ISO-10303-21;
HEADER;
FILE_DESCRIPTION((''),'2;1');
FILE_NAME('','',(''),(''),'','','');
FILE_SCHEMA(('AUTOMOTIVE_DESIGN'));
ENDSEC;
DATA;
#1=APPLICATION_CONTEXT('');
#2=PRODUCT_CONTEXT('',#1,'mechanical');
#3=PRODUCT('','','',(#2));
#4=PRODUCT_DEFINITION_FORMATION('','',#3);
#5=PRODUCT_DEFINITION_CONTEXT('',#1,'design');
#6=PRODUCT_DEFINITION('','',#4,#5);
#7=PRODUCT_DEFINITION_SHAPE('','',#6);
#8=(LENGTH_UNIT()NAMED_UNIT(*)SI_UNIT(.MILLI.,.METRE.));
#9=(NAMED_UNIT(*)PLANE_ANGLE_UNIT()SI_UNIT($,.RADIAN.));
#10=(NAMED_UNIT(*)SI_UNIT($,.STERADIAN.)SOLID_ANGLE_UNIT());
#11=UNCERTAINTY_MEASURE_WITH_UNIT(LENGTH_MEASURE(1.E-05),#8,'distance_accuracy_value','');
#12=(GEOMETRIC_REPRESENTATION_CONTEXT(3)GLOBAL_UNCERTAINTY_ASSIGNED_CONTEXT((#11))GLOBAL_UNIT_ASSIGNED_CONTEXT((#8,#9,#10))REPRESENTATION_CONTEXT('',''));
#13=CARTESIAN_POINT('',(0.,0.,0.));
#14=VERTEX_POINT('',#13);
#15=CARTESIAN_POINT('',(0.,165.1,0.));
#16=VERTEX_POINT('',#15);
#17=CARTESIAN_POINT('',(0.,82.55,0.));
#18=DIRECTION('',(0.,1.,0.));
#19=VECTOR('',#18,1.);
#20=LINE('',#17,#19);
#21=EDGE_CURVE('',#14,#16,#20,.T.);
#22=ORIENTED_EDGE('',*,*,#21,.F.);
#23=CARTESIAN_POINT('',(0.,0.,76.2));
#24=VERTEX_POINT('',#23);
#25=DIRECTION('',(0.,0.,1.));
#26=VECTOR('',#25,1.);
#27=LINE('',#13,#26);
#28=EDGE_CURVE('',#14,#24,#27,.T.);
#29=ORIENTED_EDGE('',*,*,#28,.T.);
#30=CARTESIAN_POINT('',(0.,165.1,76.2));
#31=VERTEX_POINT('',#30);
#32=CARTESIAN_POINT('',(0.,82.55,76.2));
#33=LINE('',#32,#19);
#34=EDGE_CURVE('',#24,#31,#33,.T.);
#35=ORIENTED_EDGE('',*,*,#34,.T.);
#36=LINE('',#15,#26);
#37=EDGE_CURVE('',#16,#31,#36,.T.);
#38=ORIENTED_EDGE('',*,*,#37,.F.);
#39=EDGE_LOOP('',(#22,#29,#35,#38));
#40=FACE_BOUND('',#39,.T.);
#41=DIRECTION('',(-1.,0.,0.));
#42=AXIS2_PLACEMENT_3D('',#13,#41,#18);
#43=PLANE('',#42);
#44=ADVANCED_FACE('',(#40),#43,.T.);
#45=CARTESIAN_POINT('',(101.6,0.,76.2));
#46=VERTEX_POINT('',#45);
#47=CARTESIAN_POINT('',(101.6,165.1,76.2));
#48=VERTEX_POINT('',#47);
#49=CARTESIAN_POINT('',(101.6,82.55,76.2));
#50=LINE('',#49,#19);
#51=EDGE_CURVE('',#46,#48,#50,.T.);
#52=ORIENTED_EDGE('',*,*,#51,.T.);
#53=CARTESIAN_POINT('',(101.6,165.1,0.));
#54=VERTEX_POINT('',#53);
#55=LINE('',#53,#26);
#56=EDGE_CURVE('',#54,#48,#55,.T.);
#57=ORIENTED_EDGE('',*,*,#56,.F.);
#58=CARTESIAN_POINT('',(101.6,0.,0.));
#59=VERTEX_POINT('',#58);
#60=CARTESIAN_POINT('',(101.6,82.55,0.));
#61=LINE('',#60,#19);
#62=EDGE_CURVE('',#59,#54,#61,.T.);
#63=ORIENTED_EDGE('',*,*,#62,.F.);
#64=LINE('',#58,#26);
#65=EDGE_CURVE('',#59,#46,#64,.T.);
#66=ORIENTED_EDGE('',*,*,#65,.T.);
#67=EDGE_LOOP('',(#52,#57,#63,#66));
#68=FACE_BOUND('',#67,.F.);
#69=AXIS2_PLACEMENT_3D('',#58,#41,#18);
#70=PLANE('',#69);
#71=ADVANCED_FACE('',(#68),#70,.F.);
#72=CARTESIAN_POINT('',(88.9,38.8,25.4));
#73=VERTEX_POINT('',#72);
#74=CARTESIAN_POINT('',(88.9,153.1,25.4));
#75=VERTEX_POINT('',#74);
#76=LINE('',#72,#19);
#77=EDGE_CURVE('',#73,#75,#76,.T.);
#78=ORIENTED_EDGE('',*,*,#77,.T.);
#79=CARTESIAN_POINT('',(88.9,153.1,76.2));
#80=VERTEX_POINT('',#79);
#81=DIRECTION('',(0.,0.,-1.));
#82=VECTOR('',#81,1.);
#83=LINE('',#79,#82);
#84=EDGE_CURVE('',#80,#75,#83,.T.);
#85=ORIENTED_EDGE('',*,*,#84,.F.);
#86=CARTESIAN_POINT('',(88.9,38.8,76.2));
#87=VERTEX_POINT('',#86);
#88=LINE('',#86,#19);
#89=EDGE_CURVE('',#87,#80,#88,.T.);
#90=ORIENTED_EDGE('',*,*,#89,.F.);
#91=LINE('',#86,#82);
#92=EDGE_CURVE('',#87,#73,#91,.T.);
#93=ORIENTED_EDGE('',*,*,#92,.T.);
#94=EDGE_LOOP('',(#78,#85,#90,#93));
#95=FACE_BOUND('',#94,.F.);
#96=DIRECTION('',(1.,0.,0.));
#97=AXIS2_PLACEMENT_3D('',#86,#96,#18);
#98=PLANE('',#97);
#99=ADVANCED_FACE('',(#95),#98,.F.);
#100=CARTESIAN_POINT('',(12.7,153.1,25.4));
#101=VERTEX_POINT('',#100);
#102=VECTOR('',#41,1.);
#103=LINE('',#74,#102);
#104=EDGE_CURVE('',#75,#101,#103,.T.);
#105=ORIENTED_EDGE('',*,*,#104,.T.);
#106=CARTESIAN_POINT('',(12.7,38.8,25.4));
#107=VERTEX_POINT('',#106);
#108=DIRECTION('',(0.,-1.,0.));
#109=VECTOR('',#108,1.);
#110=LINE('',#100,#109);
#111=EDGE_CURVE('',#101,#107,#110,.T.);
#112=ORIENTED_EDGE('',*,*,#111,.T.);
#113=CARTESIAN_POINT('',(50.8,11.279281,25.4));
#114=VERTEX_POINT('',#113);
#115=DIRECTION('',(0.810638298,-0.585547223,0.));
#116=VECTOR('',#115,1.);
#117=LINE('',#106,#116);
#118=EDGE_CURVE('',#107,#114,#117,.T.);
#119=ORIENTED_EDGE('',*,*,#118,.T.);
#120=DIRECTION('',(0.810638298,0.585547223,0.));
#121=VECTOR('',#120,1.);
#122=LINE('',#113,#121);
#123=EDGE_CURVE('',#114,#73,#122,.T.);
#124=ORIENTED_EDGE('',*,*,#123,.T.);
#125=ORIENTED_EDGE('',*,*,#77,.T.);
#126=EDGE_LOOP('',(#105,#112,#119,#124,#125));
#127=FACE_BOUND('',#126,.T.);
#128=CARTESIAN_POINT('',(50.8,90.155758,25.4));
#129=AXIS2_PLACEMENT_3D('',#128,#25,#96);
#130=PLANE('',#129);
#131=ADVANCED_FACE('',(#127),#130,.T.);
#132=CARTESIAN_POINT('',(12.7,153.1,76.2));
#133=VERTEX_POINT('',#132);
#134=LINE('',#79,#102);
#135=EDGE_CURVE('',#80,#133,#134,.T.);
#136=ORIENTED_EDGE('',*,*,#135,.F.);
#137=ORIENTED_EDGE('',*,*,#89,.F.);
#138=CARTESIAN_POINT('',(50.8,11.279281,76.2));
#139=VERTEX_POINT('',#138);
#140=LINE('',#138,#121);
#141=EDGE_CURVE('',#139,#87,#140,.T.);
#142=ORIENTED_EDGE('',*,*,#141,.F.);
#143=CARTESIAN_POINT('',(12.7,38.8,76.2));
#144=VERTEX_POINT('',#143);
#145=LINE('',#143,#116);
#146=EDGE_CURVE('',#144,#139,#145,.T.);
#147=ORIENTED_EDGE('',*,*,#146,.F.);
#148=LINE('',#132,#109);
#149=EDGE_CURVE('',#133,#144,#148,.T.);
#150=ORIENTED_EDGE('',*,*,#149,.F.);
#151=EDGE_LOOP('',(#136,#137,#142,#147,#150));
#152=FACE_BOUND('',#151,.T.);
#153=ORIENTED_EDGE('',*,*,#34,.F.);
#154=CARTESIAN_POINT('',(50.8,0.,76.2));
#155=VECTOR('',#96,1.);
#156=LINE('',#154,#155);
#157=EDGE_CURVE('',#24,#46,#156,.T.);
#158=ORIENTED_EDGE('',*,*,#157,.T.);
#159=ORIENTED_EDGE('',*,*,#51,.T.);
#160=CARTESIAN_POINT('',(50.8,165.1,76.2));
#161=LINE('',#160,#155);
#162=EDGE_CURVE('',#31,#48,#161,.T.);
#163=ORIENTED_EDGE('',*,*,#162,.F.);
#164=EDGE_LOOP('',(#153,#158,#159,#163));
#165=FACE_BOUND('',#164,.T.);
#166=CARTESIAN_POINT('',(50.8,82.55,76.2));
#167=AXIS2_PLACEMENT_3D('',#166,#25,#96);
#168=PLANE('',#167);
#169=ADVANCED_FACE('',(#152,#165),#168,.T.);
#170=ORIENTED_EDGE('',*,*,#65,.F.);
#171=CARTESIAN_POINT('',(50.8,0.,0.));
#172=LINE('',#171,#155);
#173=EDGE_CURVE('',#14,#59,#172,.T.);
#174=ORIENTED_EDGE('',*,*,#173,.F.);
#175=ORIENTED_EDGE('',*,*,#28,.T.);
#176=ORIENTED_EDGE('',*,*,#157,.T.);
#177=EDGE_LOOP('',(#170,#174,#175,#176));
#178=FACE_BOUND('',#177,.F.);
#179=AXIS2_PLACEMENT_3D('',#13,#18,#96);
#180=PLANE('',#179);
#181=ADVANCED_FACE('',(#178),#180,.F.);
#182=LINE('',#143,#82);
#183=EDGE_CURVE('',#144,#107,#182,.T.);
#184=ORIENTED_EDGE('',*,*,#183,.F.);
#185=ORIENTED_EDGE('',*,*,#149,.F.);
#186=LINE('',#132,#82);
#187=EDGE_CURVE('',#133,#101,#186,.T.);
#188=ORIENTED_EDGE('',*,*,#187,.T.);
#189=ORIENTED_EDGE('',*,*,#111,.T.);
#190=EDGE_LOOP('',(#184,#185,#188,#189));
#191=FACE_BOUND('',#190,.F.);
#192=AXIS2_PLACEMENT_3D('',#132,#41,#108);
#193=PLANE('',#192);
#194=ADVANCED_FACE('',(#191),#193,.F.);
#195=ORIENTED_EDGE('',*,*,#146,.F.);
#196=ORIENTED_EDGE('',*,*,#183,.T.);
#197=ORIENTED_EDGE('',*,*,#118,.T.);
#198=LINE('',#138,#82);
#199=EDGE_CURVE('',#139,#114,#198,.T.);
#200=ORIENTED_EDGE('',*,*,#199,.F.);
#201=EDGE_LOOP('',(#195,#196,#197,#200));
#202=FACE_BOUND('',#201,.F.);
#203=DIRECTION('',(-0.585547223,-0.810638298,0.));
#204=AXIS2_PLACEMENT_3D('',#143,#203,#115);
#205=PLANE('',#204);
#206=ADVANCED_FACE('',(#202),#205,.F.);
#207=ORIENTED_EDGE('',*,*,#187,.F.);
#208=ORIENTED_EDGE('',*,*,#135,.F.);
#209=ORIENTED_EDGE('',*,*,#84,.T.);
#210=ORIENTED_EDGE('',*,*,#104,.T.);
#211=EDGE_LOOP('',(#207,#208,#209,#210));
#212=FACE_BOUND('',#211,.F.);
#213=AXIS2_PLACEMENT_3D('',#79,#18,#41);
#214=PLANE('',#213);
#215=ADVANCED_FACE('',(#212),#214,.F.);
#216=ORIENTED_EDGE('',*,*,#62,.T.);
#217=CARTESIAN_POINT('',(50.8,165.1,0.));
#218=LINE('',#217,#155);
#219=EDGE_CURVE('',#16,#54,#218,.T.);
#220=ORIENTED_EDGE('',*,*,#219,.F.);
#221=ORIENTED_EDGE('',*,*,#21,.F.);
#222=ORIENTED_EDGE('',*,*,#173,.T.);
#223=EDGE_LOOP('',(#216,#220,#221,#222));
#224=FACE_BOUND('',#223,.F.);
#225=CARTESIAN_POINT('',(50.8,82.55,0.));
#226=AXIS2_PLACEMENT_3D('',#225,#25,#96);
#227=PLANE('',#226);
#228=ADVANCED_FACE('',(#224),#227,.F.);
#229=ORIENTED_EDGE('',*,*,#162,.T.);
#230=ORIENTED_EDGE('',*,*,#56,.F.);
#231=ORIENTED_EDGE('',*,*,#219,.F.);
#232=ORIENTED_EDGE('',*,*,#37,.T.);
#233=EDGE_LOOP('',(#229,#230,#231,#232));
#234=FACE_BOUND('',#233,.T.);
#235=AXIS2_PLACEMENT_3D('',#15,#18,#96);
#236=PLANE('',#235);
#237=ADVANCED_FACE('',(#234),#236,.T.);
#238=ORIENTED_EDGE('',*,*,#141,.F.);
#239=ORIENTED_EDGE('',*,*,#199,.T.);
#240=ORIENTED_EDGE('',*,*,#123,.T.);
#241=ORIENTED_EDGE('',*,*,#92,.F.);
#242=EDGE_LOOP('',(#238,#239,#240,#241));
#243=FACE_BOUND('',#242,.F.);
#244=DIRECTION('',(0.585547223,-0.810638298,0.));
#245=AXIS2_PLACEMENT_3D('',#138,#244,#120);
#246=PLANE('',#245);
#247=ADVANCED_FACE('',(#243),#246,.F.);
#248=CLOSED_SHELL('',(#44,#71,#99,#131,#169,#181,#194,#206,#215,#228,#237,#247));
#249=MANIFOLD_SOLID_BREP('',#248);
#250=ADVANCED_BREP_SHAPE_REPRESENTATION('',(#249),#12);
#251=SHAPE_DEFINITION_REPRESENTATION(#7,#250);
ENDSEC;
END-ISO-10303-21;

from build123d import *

# Parameters (mm, degrees)
F0_W     = 101.6
F0_H     = 165.1
F1_DEPTH = 76.2
F3_DEPTH = 50.8


# Not quite as in the source:
# - a feature names something its author has since deleted; it is built from what else it names


with BuildPart() as f1:
    # F0 (on Top) → F1 (new body)
    with BuildSketch(Plane.XY):
        with Locations((50.8, 82.55)):
            Rectangle(F0_W, F0_H)
    extrude(amount=F1_DEPTH)

    # F2 (on face) → F3 (cut)
    with BuildSketch(Plane.XY.offset(76.2)):
        Polygon((12.7, 38.8), (50.8, 11.2792805327), (88.9, 38.8), (88.9, 153.1), (50.8, 153.1), (12.7, 153.1), align=None)
    extrude(amount=-F3_DEPTH, mode=Mode.SUBTRACT)


solid = f1.part
